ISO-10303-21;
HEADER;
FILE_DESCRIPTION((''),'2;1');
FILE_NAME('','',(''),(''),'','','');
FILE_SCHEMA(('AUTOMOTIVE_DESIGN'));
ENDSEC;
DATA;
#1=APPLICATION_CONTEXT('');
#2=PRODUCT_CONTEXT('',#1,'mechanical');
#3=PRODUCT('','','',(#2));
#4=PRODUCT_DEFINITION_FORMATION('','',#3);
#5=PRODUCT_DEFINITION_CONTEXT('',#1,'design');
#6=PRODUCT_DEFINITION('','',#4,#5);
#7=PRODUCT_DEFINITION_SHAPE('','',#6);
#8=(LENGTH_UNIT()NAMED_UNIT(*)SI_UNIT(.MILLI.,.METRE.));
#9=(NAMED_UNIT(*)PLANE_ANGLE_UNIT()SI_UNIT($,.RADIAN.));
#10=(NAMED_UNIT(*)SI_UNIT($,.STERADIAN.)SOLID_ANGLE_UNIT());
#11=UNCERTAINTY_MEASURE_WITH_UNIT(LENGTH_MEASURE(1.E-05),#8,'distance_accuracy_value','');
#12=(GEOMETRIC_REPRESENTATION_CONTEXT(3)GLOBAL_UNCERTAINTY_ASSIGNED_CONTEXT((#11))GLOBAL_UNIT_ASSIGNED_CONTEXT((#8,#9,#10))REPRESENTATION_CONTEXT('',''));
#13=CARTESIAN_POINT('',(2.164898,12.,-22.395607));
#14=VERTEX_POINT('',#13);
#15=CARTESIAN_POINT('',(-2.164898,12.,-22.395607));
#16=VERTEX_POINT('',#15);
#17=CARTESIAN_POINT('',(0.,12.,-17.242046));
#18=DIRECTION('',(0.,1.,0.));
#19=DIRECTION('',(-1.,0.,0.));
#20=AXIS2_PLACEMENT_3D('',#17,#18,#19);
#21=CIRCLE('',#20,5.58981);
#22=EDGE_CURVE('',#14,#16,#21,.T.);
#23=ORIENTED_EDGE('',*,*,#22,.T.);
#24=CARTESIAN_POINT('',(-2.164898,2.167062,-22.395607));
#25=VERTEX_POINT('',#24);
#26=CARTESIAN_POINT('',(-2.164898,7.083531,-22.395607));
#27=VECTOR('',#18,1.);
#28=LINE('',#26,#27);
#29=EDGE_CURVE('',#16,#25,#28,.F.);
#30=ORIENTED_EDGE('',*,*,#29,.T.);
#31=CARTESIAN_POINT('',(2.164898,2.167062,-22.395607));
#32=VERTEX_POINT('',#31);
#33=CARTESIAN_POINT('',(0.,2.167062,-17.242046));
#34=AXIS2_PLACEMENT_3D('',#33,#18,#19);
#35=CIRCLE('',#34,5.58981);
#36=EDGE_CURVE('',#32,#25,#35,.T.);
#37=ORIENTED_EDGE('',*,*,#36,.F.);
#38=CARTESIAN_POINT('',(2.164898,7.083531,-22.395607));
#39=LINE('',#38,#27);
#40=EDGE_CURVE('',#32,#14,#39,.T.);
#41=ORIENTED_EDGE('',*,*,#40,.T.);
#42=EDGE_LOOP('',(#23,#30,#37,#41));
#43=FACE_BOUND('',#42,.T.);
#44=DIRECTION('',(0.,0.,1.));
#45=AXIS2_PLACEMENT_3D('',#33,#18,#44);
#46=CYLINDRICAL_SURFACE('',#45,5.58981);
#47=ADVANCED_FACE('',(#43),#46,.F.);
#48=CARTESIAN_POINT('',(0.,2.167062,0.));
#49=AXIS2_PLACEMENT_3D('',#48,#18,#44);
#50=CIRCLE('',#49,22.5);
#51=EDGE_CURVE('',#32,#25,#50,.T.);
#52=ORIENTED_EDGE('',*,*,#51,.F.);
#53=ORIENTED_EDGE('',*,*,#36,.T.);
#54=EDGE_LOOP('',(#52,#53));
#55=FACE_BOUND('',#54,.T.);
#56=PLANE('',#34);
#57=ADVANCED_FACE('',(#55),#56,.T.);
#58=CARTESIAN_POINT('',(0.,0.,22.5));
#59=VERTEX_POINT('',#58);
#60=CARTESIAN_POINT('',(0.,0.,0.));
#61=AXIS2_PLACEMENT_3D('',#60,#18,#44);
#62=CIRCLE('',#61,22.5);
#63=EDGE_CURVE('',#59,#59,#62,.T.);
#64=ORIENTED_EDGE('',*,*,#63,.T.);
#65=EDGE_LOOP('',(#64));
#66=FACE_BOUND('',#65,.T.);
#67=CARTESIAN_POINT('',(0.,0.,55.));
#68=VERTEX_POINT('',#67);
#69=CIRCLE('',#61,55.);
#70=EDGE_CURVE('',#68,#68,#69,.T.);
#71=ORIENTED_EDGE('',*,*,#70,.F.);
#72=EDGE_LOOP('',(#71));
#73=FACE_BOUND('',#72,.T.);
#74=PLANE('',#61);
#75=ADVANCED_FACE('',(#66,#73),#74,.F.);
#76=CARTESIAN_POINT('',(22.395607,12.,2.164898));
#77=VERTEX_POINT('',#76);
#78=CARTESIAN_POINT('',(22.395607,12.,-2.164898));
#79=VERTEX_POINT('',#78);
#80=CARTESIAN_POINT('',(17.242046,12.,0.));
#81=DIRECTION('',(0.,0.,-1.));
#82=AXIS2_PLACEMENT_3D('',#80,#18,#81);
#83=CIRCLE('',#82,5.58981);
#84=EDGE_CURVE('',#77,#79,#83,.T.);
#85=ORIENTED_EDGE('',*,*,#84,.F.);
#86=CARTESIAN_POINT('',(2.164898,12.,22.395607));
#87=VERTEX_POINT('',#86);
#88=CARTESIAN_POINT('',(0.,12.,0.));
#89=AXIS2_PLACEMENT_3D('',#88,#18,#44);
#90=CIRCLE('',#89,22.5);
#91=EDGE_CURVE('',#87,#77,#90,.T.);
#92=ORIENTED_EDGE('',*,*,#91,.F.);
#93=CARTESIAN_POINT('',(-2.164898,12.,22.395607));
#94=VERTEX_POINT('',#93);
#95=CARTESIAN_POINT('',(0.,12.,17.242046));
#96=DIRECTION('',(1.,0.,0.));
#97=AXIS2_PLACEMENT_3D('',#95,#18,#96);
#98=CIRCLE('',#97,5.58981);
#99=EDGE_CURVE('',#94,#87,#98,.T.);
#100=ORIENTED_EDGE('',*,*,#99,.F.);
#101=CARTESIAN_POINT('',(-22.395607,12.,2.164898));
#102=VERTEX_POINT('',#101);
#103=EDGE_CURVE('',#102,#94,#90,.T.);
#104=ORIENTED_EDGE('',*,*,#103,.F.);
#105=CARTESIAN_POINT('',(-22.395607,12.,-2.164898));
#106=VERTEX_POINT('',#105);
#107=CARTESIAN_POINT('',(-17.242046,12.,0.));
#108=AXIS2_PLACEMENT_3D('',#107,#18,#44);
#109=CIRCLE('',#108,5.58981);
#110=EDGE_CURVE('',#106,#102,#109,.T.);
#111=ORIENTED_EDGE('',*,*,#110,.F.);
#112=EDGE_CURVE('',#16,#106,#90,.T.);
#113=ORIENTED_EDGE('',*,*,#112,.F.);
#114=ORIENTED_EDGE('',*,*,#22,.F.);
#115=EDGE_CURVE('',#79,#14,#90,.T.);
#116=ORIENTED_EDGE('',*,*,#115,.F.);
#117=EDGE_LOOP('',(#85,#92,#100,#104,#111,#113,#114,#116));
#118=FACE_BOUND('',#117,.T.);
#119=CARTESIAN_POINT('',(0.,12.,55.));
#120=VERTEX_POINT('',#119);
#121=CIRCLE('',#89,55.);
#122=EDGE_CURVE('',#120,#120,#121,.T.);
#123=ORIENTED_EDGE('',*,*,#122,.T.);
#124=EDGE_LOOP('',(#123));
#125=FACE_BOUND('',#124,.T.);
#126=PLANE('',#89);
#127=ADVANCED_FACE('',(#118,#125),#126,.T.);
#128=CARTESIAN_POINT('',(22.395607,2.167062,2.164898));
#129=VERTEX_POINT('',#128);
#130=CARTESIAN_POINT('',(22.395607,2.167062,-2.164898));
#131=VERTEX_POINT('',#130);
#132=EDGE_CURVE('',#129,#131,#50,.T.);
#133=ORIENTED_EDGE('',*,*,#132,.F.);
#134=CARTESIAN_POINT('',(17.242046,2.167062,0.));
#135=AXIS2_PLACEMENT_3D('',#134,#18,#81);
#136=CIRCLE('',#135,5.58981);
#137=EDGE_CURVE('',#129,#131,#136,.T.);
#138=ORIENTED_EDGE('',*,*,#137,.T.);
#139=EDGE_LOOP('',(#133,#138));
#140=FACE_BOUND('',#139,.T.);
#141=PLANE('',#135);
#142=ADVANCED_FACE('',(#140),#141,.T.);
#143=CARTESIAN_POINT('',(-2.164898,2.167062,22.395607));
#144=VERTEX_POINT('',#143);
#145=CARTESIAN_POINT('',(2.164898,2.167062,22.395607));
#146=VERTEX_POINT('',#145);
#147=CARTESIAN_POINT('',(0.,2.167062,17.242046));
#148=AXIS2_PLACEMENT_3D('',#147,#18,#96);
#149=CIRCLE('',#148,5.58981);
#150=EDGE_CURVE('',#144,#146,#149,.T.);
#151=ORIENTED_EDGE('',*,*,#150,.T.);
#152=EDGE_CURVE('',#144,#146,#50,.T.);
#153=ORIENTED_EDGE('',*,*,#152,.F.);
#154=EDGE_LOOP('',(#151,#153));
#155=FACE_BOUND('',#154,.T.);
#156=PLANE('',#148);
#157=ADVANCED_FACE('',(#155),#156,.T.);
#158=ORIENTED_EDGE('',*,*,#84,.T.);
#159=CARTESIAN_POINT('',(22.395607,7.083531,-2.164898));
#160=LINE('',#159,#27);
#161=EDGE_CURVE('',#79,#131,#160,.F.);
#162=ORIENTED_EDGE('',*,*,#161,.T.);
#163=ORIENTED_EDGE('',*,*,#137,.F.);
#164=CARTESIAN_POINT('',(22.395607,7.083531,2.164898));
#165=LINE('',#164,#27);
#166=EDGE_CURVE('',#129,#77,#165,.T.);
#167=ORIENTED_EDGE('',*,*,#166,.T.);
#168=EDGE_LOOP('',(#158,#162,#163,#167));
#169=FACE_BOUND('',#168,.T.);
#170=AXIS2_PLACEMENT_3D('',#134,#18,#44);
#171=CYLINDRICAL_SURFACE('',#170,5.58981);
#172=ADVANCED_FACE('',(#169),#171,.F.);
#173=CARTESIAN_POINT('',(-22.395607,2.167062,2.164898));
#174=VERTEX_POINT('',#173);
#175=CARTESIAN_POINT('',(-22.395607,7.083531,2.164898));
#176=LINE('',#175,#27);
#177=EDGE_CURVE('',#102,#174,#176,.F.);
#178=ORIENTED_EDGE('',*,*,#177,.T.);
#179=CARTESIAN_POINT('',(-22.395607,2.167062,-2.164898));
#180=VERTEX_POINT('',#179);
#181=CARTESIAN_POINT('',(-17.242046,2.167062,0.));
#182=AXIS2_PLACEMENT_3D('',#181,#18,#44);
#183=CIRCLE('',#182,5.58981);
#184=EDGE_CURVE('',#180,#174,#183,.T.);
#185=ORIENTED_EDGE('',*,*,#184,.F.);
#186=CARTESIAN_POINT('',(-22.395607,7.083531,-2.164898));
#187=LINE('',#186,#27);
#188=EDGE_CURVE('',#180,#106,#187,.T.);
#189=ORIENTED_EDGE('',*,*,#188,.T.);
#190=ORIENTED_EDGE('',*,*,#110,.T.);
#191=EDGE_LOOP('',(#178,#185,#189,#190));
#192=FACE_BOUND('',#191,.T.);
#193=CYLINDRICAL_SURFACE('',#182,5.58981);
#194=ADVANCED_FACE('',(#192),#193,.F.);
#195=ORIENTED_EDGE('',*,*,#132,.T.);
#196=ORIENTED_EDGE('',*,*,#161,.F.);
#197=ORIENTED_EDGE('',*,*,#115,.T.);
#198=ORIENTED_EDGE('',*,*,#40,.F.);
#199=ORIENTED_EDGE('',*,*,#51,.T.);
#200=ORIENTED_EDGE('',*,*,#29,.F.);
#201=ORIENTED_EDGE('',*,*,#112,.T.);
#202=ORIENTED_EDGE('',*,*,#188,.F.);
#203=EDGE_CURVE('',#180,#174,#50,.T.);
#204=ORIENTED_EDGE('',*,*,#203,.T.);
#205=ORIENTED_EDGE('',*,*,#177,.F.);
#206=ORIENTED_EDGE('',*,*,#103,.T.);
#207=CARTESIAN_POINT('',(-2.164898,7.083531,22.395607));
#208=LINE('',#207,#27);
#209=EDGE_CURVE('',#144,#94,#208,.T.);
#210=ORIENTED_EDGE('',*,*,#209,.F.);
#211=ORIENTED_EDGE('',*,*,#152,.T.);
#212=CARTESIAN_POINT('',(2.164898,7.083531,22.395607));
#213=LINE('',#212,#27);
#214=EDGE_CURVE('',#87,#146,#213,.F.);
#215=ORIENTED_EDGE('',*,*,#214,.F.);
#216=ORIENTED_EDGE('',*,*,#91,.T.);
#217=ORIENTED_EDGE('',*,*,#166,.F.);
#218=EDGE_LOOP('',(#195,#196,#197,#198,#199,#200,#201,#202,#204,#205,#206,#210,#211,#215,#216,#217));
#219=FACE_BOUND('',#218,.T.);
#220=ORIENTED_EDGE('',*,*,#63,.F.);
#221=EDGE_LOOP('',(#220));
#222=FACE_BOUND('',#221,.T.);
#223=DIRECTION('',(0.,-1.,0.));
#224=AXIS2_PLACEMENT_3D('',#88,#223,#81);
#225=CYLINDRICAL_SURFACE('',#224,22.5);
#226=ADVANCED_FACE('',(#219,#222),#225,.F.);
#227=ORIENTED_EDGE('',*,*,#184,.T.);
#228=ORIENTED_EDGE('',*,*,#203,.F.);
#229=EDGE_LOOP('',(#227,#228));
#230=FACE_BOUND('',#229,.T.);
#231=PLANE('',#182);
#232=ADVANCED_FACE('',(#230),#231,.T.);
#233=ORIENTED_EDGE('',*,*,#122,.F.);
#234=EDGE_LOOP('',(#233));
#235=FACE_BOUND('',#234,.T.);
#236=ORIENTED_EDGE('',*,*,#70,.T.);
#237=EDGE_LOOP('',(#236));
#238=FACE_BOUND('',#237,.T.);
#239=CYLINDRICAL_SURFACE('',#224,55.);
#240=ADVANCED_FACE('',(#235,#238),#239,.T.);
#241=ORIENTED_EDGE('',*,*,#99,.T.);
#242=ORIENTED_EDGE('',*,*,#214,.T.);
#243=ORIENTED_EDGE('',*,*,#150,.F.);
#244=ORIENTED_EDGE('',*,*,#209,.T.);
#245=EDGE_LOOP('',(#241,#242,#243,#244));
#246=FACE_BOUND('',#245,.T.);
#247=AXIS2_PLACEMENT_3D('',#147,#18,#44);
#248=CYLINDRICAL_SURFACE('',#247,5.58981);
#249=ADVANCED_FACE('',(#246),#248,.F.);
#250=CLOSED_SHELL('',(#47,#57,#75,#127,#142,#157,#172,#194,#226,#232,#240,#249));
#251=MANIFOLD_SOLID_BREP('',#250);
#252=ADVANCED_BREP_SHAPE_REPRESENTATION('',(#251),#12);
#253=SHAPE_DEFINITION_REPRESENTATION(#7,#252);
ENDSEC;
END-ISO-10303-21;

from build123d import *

# Parameters (mm, degrees)
SKETCH1_R           = 55
BOSS_EXTRUDE1_DEPTH = 12
SKETCH2_R           = 22.5
CUT_EXTRUDE1_DEPTH  = 79.70196948
SKETCH3_R           = 5.589809808
CUT_EXTRUDE2_DEPTH  = 9.832938063
CIRPATTERN1_COUNT   = 4


with BuildPart() as part:
    # Sketch1 → Boss-Extrude1 (new body)
    with BuildSketch(Plane(origin=(0, 0, 0), x_dir=(1, 0, 0), z_dir=(0, 1, 0))):
        Circle(SKETCH1_R)
    extrude(amount=BOSS_EXTRUDE1_DEPTH)

    # Sketch2 → Cut-Extrude1 (cut, through all)
    with BuildSketch(Plane(origin=(0, 0, 0), x_dir=(1, 0, 0), z_dir=(0, 1, 0))):
        Circle(SKETCH2_R)
    extrude(amount=CUT_EXTRUDE1_DEPTH, mode=Mode.SUBTRACT)

    # Sketch3 → Cut-Extrude2 (cut)
    with BuildSketch(Plane(origin=(0, 12, 0), x_dir=(1, 0, 0), z_dir=(0, 1, 0))):
        with Locations((-17.24204606, 0)):
            Circle(SKETCH3_R)
    cut_extrude2 = extrude(amount=-CUT_EXTRUDE2_DEPTH, mode=Mode.SUBTRACT)

    # CirPattern1: Cut-Extrude2 ×4 about axis
    cirpattern1_axis = Axis((0, 0, 0), (0, 1, 0))
    for i in range(1, CIRPATTERN1_COUNT):
        add(cut_extrude2.rotate(cirpattern1_axis, i * 360 / CIRPATTERN1_COUNT), mode=Mode.SUBTRACT)


solid = part.part
